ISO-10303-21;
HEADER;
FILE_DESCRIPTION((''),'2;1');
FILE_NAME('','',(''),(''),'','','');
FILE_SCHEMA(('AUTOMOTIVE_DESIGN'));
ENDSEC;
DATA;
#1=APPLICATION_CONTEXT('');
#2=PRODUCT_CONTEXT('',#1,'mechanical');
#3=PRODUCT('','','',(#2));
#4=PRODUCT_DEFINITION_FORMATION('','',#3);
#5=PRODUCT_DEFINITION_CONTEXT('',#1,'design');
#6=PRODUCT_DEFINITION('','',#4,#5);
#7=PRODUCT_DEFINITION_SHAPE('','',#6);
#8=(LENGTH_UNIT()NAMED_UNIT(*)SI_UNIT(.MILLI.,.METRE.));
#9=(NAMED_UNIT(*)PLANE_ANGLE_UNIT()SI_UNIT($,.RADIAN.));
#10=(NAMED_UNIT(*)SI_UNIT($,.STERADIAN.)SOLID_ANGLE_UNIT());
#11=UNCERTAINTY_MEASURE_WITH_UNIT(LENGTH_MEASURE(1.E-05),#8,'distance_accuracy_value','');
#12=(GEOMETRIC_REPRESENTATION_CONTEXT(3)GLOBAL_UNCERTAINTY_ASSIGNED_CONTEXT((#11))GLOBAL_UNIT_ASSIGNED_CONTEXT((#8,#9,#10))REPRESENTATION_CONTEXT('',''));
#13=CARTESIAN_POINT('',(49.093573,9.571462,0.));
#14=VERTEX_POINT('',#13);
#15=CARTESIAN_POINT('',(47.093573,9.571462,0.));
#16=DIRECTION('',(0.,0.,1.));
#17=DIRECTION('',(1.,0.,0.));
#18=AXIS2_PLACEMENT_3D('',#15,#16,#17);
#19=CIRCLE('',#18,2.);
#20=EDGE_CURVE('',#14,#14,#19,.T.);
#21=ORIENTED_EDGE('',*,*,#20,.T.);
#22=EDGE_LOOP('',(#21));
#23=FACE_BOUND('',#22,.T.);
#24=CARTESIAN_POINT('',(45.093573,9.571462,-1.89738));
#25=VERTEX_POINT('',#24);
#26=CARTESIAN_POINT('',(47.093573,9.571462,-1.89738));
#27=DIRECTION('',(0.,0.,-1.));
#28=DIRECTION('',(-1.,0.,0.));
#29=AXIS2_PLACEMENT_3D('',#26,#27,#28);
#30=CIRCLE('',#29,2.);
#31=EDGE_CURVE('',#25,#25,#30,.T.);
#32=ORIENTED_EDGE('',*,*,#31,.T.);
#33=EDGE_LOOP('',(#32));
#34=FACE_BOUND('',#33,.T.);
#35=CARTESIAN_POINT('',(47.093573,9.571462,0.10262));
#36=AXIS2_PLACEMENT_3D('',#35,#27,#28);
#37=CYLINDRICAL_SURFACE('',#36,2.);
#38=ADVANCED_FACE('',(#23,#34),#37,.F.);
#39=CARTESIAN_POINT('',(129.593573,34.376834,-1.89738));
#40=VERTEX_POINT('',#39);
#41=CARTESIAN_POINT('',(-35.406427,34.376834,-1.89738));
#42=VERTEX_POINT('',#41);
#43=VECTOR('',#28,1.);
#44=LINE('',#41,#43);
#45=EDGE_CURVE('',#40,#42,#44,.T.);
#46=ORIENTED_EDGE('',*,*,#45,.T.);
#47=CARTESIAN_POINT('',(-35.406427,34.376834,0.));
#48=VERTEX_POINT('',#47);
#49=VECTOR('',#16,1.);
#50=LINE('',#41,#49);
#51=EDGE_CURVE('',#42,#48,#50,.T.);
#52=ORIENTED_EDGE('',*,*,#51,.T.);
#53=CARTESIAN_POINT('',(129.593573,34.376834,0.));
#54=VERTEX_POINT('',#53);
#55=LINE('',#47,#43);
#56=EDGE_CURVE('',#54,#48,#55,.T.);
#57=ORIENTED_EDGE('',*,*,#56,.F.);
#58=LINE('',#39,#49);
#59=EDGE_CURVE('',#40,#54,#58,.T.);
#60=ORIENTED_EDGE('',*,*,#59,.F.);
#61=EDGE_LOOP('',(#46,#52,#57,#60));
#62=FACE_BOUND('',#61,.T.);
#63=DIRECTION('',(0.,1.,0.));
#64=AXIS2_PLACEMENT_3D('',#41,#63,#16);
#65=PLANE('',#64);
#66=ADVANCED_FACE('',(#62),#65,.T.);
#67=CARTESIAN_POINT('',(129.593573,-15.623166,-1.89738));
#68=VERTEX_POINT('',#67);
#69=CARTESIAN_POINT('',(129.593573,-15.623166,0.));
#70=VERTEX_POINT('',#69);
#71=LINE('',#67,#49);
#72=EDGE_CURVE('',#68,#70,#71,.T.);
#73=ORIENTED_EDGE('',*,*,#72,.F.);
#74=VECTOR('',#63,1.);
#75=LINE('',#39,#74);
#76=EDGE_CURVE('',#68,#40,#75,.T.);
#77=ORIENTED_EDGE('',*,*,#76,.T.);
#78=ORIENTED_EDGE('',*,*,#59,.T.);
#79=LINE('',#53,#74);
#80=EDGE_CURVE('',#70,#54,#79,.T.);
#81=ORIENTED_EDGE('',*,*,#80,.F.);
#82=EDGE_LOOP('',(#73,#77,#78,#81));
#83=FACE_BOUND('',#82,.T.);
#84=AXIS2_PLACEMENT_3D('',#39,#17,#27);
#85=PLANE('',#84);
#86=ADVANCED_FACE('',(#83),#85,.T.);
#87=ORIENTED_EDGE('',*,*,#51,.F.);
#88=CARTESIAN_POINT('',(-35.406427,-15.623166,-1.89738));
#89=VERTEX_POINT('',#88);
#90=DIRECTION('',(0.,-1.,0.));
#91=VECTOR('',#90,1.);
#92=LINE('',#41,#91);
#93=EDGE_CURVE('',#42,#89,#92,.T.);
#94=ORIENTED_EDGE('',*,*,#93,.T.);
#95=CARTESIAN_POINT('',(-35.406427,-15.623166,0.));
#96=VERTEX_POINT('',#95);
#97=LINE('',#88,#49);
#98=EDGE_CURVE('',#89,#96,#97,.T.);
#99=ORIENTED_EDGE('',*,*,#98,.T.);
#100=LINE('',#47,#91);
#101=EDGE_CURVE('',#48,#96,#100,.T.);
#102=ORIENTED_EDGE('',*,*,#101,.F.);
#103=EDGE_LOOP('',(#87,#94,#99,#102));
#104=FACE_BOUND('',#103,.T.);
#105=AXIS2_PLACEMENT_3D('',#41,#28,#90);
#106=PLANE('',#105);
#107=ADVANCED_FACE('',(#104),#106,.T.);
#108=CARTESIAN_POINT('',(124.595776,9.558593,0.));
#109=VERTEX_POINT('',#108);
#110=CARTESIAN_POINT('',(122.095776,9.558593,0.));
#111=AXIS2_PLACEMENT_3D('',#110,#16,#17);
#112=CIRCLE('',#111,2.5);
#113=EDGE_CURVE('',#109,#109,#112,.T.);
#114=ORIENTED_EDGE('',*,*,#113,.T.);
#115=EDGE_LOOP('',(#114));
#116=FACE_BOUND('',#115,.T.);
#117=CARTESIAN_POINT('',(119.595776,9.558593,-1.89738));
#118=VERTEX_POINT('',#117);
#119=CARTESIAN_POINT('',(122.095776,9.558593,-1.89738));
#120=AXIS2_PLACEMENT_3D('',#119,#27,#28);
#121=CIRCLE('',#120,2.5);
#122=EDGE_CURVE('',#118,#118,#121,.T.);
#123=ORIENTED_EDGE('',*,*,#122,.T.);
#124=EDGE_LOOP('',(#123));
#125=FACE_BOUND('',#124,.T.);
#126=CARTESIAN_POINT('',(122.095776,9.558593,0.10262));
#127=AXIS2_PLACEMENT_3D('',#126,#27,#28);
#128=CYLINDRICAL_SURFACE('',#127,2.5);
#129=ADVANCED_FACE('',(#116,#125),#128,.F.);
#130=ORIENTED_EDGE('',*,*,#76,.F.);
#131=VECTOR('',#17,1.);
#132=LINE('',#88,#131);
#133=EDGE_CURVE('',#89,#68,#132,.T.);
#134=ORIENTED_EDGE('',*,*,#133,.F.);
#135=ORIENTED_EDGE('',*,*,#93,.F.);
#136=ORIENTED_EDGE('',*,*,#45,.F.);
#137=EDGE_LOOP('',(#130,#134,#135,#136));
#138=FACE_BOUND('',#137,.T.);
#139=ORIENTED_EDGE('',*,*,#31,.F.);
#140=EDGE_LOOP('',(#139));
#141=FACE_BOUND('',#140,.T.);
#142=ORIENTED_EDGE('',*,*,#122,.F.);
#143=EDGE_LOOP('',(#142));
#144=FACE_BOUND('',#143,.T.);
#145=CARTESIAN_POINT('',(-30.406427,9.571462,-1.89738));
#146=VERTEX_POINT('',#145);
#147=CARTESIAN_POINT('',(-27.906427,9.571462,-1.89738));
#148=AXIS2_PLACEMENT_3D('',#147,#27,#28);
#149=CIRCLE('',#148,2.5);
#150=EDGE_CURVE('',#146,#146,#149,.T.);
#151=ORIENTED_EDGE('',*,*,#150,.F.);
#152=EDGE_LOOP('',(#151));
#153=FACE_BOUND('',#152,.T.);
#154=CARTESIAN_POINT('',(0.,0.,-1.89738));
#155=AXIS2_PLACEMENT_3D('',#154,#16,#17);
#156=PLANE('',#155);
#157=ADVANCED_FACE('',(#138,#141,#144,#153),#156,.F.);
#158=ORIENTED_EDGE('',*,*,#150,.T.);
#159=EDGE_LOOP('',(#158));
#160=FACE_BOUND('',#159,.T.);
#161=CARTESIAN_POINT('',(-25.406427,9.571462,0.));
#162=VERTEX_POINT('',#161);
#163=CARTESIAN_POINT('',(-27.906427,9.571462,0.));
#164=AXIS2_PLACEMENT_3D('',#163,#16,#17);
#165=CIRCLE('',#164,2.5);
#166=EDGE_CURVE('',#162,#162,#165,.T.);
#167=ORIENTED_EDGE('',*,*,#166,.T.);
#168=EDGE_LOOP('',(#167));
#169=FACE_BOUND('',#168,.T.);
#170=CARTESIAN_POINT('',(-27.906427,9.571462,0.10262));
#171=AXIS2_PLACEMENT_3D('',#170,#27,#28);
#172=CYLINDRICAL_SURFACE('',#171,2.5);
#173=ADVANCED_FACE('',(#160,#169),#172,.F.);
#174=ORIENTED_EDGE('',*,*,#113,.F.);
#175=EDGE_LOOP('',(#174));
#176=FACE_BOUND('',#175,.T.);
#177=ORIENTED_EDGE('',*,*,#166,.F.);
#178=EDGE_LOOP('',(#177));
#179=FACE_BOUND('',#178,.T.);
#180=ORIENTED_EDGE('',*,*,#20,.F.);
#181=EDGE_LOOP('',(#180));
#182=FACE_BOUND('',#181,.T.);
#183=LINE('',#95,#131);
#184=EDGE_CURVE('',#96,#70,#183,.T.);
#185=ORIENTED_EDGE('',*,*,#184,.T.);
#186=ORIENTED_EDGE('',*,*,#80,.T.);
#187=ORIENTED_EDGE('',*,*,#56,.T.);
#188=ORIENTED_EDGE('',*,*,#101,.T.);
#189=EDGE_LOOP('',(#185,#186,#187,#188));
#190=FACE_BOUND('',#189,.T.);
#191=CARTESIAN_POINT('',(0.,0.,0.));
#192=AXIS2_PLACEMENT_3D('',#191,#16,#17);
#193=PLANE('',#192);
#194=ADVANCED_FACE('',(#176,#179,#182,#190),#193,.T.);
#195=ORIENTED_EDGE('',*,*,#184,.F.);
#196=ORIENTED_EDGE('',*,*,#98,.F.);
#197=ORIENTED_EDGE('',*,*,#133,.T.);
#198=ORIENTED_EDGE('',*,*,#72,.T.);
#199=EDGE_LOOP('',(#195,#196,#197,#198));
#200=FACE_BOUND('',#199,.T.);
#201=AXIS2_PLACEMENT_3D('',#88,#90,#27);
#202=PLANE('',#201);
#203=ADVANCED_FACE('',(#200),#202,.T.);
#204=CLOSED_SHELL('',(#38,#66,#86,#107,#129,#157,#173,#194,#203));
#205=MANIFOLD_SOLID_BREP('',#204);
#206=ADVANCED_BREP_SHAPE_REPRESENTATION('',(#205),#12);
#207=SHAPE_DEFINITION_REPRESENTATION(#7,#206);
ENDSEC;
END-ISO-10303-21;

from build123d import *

# Parameters (mm, degrees)
SKETCH2_W          = 165
SKETCH2_H          = 50
BASE_FLANGE1_DEPTH = 1.89738
SKETCH7_R          = 2.5
SKETCH7_R_2        = 2
CUT_EXTRUDE1_DEPTH = 2


# Sheet-metal steps are written as plain solids
with BuildPart() as part:
    # Sketch2 → Base-Flange1 (new body)
    with BuildSketch(Plane.XY):
        with Locations((47.093573199, 9.376833926)):
            Rectangle(SKETCH2_W, SKETCH2_H)
    extrude(amount=-BASE_FLANGE1_DEPTH)

    # Sketch7 → Cut-Extrude1 (cut)
    with BuildSketch(Plane(origin=(0, 0, -1.89738), x_dir=(-1, 0, 0), z_dir=(0, 0, -1))):
        with Locations((-122.095775959, 9.558593498)):
            Circle(SKETCH7_R)
        with Locations((27.906426801, 9.571462067)):
            Circle(SKETCH7_R)
        with Locations((-47.093573199, 9.571462067)):
            Circle(SKETCH7_R_2)
    extrude(amount=-CUT_EXTRUDE1_DEPTH, mode=Mode.SUBTRACT)


solid = part.part
